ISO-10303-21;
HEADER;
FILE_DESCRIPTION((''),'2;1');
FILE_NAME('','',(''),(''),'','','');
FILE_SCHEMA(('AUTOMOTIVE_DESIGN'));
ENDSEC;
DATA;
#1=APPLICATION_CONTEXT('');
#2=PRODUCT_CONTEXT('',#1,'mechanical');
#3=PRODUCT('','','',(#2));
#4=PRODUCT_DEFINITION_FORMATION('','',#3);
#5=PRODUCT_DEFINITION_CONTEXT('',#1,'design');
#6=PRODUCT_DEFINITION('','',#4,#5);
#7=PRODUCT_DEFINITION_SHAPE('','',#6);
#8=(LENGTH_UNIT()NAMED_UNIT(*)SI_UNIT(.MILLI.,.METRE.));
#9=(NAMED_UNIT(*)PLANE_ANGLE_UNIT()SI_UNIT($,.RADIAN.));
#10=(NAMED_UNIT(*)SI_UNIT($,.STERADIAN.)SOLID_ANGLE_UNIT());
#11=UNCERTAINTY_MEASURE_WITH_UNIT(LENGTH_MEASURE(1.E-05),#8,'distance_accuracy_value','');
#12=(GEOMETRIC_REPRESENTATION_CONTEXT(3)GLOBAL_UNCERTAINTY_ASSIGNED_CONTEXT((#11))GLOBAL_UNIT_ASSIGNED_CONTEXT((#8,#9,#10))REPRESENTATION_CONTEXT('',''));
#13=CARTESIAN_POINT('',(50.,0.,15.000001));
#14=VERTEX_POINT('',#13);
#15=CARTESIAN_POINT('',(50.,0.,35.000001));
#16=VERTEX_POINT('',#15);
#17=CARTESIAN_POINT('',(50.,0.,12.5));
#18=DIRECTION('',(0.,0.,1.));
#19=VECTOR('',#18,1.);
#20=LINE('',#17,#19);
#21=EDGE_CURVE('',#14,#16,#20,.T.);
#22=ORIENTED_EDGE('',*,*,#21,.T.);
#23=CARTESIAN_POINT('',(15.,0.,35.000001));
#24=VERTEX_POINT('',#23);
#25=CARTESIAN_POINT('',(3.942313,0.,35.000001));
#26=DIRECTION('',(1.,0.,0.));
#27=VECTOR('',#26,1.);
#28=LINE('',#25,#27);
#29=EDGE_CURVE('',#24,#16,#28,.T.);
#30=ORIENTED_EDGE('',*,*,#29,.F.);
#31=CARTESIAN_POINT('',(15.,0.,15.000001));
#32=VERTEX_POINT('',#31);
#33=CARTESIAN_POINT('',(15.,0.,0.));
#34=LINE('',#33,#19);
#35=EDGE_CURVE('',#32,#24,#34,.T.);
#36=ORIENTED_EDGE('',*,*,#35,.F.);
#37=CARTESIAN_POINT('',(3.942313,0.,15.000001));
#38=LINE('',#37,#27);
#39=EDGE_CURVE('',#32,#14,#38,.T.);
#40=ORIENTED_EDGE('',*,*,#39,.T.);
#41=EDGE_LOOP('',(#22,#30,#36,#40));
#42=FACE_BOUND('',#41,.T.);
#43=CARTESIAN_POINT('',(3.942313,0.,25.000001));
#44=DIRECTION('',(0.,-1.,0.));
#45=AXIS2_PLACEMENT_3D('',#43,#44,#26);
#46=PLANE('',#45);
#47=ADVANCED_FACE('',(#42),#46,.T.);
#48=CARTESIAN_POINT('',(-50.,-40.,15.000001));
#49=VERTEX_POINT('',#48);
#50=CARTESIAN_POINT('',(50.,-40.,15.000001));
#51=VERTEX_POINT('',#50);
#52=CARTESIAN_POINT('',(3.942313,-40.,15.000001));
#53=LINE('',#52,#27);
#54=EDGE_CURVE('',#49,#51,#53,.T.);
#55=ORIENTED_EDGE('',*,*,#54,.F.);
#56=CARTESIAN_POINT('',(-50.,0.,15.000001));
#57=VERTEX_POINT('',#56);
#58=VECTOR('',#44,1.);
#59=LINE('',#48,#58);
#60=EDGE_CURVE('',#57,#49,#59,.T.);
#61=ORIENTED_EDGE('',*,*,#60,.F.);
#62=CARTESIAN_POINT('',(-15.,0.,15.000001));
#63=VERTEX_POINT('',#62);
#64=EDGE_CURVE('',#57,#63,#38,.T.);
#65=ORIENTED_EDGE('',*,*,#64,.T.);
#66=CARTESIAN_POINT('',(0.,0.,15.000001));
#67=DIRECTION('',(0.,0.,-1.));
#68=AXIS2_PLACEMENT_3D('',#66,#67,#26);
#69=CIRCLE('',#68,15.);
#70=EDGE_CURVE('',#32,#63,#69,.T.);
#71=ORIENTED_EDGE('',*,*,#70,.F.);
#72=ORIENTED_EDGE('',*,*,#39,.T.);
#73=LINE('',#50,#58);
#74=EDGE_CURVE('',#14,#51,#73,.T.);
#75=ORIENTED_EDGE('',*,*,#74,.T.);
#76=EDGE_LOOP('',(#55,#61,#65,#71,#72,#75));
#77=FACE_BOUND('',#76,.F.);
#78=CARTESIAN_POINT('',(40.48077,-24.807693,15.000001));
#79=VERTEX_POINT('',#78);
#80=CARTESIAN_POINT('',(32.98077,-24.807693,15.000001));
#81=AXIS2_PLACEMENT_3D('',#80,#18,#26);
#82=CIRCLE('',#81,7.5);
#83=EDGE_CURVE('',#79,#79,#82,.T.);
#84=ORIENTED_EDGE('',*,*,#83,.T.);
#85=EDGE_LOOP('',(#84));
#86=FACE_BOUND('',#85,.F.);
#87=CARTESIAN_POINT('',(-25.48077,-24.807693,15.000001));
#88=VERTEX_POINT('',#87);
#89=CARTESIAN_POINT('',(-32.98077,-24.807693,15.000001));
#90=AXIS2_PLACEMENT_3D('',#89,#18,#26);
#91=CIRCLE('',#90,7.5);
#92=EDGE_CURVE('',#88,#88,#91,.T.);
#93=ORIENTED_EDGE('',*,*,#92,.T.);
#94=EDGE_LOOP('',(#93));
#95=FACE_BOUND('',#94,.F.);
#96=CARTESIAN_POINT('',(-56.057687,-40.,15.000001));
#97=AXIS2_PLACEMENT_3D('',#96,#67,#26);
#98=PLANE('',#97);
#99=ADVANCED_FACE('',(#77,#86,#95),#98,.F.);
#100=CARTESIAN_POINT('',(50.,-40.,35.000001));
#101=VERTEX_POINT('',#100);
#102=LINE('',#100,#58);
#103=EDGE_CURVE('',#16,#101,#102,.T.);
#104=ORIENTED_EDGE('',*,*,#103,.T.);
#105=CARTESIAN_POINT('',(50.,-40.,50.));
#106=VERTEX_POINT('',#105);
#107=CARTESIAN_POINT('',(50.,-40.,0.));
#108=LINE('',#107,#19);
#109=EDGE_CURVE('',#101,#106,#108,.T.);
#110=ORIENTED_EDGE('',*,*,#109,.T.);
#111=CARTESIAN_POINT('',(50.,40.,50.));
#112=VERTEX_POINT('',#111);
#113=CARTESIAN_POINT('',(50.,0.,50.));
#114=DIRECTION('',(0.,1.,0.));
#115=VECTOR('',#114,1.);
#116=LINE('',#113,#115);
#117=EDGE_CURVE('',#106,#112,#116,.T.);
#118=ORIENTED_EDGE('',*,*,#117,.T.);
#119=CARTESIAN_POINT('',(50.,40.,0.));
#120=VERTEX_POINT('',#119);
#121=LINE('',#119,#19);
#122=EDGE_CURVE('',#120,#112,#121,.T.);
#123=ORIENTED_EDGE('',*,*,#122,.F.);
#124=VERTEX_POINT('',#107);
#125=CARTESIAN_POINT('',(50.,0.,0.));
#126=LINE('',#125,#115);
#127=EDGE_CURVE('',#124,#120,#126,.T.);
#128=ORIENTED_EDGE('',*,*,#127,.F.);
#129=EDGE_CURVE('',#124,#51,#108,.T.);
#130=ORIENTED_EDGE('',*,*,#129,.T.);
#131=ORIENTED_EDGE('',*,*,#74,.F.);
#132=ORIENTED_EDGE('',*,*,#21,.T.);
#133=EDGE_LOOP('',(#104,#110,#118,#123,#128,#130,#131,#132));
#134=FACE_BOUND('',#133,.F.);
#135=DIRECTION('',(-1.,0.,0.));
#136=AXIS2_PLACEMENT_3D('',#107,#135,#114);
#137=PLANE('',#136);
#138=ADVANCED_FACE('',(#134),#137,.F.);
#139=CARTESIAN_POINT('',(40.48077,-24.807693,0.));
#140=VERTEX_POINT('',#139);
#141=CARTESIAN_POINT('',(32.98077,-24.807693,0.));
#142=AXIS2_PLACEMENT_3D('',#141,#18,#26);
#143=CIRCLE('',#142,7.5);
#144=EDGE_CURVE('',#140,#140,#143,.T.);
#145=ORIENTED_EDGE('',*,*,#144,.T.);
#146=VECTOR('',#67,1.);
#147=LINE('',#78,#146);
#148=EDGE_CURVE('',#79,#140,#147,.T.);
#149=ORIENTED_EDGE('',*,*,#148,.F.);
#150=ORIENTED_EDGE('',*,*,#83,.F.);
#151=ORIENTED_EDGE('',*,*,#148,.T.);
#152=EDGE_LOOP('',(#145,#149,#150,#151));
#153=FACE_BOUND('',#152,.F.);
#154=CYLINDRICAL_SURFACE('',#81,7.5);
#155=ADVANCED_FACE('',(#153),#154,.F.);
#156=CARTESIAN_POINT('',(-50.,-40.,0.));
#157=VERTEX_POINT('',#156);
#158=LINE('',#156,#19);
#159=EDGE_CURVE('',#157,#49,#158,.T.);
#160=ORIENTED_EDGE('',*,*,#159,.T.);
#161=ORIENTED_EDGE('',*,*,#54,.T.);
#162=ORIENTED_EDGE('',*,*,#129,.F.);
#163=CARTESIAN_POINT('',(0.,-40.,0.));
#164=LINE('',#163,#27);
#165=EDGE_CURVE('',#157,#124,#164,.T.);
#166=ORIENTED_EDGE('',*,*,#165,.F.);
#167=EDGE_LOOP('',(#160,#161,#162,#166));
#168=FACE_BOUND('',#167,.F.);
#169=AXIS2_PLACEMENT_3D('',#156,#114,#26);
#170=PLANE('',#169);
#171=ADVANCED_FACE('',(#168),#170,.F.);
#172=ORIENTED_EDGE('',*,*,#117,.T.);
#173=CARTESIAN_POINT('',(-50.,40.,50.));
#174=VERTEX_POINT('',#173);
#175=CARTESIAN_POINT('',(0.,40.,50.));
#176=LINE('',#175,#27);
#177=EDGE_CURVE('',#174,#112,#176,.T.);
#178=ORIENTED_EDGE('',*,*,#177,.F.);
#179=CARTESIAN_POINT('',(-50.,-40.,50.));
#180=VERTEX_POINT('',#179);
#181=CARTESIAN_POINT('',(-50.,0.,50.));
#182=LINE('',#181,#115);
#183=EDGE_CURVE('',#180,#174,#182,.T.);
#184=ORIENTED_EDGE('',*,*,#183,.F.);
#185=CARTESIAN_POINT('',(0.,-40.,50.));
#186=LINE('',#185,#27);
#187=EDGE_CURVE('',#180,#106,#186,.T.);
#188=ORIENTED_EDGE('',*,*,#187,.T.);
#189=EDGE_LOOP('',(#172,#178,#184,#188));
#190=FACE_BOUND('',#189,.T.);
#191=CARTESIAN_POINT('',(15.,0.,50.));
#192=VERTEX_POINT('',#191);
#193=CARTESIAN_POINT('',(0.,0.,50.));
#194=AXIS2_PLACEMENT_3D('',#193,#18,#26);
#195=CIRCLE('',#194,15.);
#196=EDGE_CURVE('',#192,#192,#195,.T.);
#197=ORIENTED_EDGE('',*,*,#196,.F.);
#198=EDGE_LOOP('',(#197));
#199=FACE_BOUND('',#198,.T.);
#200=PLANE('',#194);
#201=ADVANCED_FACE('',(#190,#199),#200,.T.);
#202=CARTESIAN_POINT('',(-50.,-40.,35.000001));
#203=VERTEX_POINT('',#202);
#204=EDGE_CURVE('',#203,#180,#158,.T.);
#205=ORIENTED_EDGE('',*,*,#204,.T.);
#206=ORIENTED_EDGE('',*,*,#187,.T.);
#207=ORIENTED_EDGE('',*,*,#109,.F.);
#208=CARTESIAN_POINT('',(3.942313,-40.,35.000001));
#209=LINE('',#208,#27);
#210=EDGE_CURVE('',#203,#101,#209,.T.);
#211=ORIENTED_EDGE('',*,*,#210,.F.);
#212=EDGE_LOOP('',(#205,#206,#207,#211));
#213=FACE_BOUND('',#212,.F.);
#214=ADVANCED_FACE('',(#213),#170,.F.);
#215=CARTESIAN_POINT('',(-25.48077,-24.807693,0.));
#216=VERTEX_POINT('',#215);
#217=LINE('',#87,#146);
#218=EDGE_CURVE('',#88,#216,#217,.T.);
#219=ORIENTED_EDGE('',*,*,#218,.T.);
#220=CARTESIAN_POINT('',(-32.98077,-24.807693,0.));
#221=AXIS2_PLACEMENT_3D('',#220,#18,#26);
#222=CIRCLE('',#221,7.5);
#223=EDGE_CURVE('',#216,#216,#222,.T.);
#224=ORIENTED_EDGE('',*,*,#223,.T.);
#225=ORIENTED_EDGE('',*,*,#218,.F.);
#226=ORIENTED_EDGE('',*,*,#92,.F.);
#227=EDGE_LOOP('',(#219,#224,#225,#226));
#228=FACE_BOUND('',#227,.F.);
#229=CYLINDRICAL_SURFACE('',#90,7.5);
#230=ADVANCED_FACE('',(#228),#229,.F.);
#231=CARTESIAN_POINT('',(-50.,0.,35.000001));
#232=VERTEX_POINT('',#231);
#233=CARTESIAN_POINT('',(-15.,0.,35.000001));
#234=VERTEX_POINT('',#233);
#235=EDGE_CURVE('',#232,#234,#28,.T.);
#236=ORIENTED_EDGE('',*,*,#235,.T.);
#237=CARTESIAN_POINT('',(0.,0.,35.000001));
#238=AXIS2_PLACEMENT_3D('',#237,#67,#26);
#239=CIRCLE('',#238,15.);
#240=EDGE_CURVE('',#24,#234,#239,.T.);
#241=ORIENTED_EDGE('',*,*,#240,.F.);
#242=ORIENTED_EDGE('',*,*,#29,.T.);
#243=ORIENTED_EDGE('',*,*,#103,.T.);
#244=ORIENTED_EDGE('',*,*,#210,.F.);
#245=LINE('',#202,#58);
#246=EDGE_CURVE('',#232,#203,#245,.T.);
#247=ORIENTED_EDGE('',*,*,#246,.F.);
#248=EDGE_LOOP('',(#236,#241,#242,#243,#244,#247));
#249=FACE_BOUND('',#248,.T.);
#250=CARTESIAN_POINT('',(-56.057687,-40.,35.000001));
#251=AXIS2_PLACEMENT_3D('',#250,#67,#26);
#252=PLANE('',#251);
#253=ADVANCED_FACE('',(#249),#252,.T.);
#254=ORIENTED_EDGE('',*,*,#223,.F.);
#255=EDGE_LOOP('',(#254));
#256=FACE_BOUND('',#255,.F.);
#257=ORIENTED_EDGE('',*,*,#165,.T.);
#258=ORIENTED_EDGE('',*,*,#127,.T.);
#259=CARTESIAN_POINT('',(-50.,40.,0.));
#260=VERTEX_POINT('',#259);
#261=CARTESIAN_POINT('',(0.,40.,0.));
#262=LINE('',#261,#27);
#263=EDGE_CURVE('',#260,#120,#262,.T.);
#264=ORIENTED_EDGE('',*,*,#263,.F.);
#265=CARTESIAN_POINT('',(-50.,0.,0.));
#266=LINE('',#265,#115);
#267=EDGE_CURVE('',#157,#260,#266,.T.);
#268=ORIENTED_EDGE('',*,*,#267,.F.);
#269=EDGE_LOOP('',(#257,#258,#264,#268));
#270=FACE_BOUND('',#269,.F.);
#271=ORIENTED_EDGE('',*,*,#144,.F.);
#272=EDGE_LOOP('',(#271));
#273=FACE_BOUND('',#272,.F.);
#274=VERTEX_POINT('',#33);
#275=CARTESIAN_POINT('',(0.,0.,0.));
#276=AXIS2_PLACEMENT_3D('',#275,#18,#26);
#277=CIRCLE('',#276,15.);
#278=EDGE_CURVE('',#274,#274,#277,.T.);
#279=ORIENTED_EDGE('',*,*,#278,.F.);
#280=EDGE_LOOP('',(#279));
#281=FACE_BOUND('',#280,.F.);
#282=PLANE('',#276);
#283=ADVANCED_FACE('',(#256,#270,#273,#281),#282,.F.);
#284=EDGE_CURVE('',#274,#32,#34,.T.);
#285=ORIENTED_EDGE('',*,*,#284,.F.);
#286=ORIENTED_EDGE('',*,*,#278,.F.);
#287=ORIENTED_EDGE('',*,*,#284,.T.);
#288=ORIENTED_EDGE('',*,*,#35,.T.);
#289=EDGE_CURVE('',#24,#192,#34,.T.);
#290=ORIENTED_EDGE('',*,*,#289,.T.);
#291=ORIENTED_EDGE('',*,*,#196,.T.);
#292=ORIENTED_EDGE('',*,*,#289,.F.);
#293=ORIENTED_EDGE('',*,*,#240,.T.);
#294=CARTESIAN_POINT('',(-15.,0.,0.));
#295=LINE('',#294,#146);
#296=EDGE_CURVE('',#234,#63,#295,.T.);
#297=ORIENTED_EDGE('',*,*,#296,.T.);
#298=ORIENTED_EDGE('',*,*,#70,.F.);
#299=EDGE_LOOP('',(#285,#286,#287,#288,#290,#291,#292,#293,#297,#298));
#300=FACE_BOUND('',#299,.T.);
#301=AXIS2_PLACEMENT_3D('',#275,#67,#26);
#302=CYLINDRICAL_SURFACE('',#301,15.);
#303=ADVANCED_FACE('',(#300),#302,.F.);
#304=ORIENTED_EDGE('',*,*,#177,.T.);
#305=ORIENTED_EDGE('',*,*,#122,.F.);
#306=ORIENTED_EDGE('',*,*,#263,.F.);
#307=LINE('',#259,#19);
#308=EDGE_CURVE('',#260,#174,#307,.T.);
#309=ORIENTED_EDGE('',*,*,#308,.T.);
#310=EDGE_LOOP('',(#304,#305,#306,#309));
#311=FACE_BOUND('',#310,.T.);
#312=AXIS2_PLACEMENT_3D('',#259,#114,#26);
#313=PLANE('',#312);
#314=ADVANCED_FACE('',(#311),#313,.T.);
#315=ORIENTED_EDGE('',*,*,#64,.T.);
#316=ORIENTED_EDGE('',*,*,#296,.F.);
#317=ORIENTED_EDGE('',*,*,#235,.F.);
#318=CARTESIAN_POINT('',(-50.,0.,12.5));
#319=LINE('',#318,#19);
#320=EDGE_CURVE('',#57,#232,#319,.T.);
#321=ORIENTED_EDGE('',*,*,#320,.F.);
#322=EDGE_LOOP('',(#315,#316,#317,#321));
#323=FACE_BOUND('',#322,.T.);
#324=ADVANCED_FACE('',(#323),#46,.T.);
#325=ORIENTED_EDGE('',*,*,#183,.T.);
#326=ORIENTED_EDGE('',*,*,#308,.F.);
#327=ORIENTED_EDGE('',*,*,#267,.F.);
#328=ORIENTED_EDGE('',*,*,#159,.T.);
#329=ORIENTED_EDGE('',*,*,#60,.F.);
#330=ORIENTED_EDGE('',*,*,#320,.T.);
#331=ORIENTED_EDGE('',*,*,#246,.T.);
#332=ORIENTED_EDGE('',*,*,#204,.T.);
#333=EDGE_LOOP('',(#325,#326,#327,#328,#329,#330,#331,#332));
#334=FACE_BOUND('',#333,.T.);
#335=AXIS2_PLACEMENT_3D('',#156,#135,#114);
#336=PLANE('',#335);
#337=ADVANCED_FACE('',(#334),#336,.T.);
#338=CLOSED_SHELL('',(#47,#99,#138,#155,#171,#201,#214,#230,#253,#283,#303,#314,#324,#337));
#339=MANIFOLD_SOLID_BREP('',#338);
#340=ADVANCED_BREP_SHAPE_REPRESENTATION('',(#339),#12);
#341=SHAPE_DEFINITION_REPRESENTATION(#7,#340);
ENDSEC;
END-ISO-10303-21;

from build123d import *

# Parameters (mm, degrees)
F0_W     = 100
F0_H     = 80
F0_R     = 15
F1_DEPTH = 50
F2_W     = 120
F2_H     = 20
F3_DEPTH = 40
F4_R     = 7.5
F5_DEPTH = 25


with BuildPart() as f1:
    # F0 (on Top) → F1 (new body)
    with BuildSketch(Plane.XY):
        Rectangle(F0_W, F0_H)
        Circle(F0_R, mode=Mode.SUBTRACT)
    extrude(amount=F1_DEPTH)

    # F2 (on face) → F3 (cut)
    with BuildSketch(Plane.XZ.offset(40)):
        with Locations((3.9423131943, 25.000000596)):
            Rectangle(F2_W, F2_H)
    extrude(amount=-F3_DEPTH, mode=Mode.SUBTRACT)

    # F4 (on face) → F5 (cut)
    with BuildSketch(Plane.XY.offset(15.000000596)):
        with Locations((-32.9807698727, -24.8076934367)):
            Circle(F4_R)
        with Locations((32.9807698727, -24.8076934367)):
            Circle(F4_R)
    extrude(amount=-F5_DEPTH, mode=Mode.SUBTRACT)


solid = f1.part
